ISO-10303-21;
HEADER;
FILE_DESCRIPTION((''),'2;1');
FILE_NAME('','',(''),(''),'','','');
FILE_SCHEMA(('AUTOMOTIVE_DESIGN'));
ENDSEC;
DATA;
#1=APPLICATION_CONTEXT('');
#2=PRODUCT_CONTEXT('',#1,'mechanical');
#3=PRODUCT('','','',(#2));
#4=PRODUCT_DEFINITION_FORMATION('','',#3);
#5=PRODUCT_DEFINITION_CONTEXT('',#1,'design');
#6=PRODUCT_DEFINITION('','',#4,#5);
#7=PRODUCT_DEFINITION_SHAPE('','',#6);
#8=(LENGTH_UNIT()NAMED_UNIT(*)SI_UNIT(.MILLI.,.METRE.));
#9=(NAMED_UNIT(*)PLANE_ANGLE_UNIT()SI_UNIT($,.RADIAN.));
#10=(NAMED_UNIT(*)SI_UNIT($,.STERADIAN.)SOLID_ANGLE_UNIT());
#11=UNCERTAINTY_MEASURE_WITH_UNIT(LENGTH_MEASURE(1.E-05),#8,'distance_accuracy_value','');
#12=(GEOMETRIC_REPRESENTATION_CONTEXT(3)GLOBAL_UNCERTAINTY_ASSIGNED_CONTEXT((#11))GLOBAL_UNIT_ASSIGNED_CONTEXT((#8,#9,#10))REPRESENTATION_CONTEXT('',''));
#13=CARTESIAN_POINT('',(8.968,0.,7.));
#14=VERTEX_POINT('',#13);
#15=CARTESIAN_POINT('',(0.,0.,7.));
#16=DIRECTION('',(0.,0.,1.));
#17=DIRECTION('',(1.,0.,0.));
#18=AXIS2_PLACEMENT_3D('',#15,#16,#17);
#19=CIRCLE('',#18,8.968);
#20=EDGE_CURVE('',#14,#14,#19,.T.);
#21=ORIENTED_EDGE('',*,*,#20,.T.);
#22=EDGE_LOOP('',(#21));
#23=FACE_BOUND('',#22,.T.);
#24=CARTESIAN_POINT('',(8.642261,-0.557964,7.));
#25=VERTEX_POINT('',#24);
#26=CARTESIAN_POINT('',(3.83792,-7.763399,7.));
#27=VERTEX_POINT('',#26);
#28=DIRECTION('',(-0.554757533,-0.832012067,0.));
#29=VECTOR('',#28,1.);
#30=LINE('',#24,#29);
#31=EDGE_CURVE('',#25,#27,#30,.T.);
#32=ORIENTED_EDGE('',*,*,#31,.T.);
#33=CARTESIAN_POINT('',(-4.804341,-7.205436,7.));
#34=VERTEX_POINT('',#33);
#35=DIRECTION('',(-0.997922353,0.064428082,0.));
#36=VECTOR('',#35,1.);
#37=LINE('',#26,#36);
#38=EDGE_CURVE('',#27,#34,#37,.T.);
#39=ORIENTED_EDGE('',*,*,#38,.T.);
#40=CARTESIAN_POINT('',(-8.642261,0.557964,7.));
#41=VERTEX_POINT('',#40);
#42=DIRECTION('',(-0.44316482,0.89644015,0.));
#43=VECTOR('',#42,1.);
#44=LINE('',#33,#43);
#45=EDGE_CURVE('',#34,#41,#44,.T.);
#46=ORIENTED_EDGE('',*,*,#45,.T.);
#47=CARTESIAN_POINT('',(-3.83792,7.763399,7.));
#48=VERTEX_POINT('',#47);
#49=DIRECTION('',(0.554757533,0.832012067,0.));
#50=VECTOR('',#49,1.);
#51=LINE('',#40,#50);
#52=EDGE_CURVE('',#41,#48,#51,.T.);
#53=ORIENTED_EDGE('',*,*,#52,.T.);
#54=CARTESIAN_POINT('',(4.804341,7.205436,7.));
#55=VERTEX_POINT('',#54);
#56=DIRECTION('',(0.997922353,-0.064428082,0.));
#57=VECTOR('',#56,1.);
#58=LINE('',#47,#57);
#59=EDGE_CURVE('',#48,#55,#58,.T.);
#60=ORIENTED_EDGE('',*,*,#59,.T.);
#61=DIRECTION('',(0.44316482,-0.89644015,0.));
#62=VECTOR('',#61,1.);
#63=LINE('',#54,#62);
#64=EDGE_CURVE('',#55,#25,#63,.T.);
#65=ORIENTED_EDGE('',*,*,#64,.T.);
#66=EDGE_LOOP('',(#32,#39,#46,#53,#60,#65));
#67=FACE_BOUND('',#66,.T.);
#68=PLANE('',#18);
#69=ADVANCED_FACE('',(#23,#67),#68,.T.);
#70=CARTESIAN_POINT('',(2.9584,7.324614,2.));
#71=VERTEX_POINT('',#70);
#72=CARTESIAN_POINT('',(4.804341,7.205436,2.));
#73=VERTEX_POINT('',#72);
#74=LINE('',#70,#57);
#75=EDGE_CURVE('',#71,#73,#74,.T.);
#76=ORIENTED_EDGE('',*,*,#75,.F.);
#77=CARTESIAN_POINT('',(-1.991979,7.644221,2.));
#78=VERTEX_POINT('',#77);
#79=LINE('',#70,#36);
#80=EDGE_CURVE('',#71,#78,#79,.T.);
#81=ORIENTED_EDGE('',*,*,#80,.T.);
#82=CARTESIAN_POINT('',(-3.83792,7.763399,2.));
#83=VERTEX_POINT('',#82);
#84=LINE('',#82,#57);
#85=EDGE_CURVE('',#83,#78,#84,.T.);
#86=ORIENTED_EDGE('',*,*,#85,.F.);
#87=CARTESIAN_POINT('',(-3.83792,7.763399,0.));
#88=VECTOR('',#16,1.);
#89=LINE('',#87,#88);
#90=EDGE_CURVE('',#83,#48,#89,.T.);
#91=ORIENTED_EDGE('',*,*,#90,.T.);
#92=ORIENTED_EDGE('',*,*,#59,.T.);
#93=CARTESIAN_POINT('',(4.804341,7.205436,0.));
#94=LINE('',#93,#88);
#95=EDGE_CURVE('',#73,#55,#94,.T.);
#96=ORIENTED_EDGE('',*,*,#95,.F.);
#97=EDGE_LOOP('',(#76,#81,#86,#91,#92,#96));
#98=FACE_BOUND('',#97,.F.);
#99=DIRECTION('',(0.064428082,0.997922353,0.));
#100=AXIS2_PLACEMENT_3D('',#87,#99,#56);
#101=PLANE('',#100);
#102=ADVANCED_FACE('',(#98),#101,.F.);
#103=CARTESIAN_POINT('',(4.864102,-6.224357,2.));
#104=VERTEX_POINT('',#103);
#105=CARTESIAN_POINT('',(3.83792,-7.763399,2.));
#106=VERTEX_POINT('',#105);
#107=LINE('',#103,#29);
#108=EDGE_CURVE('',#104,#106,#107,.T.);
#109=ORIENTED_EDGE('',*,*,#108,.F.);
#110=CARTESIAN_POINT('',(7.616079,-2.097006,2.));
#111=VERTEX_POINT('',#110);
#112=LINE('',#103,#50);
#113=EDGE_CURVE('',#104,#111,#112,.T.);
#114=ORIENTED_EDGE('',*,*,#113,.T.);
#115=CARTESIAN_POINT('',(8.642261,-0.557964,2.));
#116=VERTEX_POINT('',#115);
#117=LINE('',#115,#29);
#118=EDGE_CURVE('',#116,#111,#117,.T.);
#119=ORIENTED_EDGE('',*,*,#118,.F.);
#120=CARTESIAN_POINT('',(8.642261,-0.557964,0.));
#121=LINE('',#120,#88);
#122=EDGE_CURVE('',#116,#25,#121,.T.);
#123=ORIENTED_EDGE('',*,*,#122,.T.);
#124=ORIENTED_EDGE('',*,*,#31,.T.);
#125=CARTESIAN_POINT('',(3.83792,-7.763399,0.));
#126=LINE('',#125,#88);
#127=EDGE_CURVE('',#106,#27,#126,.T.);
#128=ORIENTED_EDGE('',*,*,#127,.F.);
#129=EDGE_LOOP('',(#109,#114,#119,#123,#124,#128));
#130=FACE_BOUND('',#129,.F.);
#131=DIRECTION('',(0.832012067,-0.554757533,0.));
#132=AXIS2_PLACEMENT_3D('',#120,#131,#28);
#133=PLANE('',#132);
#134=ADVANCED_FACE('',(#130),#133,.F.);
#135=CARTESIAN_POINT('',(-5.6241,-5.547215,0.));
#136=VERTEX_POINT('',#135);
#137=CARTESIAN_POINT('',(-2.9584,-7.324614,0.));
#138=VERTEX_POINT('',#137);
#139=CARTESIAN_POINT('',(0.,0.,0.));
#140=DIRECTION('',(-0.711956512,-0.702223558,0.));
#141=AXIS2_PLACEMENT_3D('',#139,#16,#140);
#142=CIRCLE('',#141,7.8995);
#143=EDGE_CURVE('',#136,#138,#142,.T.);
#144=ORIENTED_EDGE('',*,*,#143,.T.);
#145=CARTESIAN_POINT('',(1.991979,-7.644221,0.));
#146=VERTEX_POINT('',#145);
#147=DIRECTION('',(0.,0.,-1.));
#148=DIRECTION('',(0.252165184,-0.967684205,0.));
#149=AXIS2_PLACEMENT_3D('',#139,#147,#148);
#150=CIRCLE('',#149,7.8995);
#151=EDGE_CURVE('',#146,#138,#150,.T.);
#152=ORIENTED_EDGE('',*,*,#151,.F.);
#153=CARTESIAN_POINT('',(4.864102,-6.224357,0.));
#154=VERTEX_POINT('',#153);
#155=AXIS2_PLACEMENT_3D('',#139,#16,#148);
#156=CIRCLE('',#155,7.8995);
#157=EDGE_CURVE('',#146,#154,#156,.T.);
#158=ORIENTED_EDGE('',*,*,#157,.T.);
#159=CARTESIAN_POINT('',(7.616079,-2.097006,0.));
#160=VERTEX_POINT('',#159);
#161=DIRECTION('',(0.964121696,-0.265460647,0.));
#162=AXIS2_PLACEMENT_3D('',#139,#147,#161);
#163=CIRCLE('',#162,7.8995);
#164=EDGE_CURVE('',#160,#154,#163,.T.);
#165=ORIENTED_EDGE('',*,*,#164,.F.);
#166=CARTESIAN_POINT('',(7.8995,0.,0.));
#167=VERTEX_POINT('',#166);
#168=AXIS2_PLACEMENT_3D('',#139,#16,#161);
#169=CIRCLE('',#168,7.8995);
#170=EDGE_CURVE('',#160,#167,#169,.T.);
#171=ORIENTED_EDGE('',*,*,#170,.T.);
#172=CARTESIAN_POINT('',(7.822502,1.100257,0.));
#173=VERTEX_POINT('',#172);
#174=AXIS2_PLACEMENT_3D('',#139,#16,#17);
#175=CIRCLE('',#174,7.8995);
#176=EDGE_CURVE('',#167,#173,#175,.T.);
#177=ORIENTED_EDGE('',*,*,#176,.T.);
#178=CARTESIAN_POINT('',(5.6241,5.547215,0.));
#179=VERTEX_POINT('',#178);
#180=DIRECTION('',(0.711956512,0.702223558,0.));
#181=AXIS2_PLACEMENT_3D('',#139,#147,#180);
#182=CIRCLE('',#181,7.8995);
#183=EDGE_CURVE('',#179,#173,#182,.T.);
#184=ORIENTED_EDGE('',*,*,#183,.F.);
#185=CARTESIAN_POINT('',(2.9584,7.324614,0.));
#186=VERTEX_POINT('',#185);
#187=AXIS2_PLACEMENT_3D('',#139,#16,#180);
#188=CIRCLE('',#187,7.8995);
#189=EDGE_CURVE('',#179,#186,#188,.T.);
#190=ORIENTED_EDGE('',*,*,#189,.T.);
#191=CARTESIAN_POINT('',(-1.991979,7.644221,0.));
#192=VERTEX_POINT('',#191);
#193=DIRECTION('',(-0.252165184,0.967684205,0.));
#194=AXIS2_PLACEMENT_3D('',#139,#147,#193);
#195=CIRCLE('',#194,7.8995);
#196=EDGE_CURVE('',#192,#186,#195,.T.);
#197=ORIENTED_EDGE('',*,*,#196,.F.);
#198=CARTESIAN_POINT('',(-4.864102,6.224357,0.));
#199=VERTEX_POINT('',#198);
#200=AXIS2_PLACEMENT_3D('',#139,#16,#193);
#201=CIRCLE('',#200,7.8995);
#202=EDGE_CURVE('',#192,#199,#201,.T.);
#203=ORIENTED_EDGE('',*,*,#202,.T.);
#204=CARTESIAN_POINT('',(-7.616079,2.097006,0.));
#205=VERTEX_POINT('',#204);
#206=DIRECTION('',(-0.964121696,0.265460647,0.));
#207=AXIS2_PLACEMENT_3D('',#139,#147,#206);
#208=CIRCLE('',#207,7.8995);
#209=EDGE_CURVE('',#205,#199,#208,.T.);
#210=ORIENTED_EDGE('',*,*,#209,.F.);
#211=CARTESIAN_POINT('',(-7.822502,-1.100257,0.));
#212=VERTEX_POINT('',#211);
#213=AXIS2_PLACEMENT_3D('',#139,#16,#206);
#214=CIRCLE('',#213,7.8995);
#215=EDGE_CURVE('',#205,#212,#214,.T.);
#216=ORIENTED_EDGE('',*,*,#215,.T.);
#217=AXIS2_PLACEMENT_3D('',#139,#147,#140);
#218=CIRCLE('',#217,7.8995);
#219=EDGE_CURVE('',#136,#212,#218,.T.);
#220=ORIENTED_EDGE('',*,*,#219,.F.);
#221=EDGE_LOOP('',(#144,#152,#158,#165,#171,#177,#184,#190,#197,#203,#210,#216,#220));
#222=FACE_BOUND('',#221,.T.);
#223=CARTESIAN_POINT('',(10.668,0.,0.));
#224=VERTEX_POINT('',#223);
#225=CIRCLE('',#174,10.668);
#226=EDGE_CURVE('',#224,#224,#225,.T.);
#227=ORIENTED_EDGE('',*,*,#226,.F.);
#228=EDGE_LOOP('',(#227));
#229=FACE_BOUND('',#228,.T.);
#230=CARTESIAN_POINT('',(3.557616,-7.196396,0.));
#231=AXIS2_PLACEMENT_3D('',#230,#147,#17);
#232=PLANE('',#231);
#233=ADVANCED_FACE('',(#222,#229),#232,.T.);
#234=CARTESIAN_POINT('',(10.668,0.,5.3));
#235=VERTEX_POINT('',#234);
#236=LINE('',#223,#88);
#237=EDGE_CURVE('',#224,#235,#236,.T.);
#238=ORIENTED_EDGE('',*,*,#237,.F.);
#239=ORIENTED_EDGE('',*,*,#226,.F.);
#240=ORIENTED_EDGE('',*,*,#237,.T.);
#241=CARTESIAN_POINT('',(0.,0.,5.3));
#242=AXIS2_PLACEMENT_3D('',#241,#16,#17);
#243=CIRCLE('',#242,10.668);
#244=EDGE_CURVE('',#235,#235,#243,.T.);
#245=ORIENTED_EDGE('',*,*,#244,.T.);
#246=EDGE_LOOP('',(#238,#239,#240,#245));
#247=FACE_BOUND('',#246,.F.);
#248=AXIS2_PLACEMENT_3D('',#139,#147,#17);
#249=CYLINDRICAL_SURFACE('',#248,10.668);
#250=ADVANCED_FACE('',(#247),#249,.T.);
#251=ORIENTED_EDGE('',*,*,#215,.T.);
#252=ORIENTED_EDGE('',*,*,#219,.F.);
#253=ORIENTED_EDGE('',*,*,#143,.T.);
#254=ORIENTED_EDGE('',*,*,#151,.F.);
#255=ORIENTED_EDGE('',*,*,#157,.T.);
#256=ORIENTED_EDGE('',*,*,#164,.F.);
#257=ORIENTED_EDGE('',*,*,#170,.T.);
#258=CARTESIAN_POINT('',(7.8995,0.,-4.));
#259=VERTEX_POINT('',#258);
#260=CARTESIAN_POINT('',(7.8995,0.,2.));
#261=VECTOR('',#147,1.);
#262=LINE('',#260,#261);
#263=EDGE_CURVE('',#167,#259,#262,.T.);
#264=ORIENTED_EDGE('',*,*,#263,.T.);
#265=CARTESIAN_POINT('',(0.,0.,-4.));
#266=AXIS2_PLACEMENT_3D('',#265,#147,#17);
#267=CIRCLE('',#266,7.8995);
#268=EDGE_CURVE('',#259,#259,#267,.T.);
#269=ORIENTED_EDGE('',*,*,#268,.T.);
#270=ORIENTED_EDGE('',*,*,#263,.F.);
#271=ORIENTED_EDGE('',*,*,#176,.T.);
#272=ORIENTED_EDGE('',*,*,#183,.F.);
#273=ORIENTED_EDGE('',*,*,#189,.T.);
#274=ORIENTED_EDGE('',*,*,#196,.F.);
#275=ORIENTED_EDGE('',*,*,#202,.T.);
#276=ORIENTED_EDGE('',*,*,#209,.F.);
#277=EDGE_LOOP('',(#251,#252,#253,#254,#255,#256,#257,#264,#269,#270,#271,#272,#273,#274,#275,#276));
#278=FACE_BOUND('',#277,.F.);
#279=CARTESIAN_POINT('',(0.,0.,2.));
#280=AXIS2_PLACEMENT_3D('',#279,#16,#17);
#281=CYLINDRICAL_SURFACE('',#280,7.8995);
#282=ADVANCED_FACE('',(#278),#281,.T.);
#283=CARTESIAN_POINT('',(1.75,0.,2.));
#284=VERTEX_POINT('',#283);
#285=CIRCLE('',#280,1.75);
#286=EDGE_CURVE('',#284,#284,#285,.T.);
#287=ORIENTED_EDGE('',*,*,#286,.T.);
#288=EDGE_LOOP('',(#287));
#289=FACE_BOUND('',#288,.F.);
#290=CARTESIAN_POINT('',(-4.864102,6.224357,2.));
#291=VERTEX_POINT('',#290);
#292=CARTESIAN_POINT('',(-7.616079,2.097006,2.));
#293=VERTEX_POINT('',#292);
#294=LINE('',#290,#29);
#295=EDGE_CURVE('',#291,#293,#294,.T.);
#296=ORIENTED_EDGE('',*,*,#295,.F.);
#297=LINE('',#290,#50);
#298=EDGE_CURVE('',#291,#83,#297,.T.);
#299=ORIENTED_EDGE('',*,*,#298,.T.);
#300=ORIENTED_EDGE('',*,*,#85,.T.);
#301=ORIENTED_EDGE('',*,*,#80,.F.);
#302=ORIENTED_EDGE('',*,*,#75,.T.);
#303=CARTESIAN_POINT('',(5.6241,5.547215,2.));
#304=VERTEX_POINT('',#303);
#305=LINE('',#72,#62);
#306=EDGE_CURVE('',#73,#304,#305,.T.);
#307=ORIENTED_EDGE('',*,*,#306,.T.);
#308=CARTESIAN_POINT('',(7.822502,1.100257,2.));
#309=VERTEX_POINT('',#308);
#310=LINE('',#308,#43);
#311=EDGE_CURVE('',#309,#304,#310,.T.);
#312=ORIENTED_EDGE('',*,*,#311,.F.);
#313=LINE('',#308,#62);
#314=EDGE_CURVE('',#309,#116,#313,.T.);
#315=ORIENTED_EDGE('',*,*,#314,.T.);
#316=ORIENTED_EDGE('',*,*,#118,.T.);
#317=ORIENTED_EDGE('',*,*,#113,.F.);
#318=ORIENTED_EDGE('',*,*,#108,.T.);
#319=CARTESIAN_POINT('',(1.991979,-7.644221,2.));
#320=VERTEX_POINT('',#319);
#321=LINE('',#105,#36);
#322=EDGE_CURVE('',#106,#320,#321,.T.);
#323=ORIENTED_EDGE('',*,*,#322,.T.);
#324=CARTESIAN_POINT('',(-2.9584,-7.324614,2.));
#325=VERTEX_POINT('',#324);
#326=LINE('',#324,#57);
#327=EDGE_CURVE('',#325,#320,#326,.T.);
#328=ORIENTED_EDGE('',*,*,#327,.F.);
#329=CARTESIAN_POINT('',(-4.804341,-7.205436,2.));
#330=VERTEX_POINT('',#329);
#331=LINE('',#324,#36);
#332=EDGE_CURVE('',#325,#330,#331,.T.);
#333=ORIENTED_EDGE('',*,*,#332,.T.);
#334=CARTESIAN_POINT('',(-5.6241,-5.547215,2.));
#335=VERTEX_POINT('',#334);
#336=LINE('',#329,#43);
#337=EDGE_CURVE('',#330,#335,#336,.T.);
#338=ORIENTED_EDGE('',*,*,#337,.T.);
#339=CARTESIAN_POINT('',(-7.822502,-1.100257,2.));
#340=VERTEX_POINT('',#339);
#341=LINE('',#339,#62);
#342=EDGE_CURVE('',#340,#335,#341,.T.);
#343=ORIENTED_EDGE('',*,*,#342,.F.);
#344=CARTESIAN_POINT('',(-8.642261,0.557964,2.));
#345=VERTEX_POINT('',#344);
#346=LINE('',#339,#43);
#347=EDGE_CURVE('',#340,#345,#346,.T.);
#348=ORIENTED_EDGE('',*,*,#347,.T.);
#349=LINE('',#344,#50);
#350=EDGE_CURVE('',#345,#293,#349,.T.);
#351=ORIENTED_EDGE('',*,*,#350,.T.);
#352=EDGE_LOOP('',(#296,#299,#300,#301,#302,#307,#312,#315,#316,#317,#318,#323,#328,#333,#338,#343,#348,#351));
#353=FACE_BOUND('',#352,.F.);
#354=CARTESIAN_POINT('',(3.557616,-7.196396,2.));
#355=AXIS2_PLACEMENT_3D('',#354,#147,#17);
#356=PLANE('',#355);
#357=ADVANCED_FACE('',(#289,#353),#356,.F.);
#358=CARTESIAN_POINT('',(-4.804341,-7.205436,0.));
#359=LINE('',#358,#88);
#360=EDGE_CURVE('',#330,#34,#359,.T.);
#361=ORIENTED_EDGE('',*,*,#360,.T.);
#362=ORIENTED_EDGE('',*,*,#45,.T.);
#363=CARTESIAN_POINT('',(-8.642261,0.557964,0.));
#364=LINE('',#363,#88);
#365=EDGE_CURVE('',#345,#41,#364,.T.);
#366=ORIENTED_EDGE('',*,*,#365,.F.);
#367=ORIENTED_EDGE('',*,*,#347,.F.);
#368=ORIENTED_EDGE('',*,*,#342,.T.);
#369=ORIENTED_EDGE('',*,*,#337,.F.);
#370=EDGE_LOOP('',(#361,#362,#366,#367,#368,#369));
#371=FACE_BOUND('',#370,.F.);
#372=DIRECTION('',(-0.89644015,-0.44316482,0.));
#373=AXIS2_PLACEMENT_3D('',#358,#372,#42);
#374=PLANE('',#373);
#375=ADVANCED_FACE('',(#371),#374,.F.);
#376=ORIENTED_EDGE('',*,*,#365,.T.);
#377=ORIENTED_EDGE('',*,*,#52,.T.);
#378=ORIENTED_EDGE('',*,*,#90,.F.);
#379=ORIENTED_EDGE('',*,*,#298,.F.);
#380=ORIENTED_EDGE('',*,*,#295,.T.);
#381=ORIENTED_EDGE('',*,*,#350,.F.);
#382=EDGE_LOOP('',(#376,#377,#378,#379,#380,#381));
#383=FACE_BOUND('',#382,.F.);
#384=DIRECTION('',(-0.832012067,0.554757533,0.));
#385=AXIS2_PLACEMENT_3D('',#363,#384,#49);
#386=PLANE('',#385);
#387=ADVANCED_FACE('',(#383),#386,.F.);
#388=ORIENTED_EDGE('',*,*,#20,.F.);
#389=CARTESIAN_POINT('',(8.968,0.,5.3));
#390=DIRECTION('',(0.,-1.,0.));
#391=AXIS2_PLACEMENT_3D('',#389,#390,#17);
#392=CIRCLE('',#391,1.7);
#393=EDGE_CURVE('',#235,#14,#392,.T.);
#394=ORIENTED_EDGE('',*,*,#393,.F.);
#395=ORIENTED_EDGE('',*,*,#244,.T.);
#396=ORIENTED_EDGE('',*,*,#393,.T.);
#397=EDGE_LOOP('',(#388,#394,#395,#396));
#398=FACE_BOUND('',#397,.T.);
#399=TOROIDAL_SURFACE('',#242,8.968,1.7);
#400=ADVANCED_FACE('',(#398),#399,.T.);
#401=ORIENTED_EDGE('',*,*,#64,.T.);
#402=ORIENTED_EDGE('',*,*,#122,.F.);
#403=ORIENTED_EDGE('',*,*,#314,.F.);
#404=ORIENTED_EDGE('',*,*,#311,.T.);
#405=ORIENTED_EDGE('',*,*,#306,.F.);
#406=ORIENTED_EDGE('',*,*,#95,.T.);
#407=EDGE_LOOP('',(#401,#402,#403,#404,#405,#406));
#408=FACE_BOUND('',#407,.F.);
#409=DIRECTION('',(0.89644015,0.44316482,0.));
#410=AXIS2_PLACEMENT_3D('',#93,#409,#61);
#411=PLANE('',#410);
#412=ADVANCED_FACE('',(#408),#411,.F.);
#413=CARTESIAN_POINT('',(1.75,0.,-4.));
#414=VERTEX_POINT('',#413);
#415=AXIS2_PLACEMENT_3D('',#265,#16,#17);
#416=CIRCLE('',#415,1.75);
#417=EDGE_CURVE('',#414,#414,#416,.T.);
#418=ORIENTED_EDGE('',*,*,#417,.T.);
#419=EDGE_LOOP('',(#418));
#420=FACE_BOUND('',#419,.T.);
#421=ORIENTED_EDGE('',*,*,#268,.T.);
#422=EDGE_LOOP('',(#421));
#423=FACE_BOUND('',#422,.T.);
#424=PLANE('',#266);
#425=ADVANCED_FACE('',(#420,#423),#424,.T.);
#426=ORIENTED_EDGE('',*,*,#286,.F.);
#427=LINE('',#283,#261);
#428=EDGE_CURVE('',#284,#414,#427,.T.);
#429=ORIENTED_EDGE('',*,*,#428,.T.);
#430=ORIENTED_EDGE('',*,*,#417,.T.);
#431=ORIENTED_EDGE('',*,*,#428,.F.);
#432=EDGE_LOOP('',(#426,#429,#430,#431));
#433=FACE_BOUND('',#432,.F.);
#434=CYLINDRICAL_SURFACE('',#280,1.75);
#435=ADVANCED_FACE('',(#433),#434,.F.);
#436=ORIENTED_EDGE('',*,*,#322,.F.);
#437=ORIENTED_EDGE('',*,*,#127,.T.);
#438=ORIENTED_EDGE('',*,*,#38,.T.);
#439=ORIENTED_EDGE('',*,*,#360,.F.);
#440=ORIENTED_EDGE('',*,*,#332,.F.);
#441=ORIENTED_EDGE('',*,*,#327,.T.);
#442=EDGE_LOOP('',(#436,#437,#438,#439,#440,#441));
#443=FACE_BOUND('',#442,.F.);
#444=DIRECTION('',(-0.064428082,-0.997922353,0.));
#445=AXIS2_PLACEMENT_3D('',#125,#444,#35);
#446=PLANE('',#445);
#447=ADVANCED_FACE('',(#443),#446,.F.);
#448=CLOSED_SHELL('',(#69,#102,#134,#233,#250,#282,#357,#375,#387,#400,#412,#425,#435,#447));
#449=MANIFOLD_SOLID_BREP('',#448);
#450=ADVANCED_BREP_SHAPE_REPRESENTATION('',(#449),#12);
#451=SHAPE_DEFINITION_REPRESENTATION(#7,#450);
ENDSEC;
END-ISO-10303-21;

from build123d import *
from build123d import SkipClean  # not in build123d's __all__

# Parameters (mm, degrees)
F0_R      = 10.668
F1_DEPTH  = 7
F4_DEPTH  = 2
F7_DEPTH  = 2
F8_R      = 7.8995
F9_DEPTH  = 6
F5_R      = 1.75
F10_DEPTH = 25
F11_R     = 1.7


with BuildPart() as f1:
    # F0 (on Top) → F1 (new body)
    with BuildSketch(Plane.XY):
        Circle(F0_R)
        Polygon((-4.8043411611, -7.2054358652), (-8.6422610852, 0.5579635614), (-3.837919924, 7.7633994266), (4.8043411611, 7.2054358652), (8.6422610852, -0.5579635614), (3.837919924, -7.7633994266), align=None, mode=Mode.SUBTRACT)
    extrude(amount=F1_DEPTH)

    # F3 (on offset) → F4 (join)
    with BuildSketch(Plane(origin=(0, 0, 2), x_dir=(1, 0, 0), z_dir=(0, 0, -1))):
        with BuildLine():
            ThreePointArc((1.9919788729, 7.6442213744), (3.5007804976, 7.081428963), (4.8641016704, 6.2243566085))
            Line((4.8641016704, 6.2243566085), (3.837919924, 7.7633994266))
            Line((3.837919924, 7.7633994266), (1.9919788729, 7.6442213744))
        make_face()
        with BuildLine():
            ThreePointArc((-5.6241004659, 5.5472149949), (-4.3823071282, 6.5724793255), (-2.95840011, 7.3246139174))
            Line((-2.95840011, 7.3246139174), (-4.8043411611, 7.2054358652))
            Line((-4.8043411611, 7.2054358652), (-5.6241004659, 5.5472149949))
        make_face()
        with BuildLine():
            ThreePointArc((-7.6160793388, -2.0970063795), (-7.8830876258, -0.5089496375), (-7.8225017804, 1.1002573089))
            Line((-7.8225017804, 1.1002573089), (-8.6422610852, -0.5579635614))
            Line((-8.6422610852, -0.5579635614), (-7.6160793388, -2.0970063795))
        make_face()
        with BuildLine():
            Line((-3.837919924, -7.7633994266), (-1.9919788729, -7.6442213744))
            ThreePointArc((-1.9919788729, -7.6442213744), (-3.5007804976, -7.081428963), (-4.8641016704, -6.2243566085))
            Line((-4.8641016704, -6.2243566085), (-3.837919924, -7.7633994266))
        make_face()
        with BuildLine():
            ThreePointArc((7.6160793388, 2.0970063795), (7.8283241817, 1.0580362738), (7.8995, 0))
            ThreePointArc((7.8995, 0), (7.880226934, -0.5514741317), (7.8225017804, -1.1002573089))
            Line((7.8225017804, -1.1002573089), (8.6422610852, 0.5579635614))
            Line((8.6422610852, 0.5579635614), (7.6160793388, 2.0970063795))
        make_face()
        with BuildLine():
            Line((4.8043411611, -7.2054358652), (5.6241004659, -5.5472149949))
            ThreePointArc((5.6241004659, -5.5472149949), (4.3823071282, -6.5724793255), (2.95840011, -7.3246139174))
            Line((2.95840011, -7.3246139174), (4.8043411611, -7.2054358652))
        make_face()
    extrude(amount=F4_DEPTH)

    # F6 (on face) → F7 (cut)
    with BuildSketch(Plane(origin=(0, 0, 0), x_dir=(1, 0, 0), z_dir=(0, 0, -1))):
        with BuildLine():
            Line((4.8641016704, 6.2243566085), (7.6160793388, 2.0970063795))
            ThreePointArc((7.6160793388, 2.0970063795), (6.5724793255, 4.3823071282), (4.8641016704, 6.2243566085))
        make_face()
        with BuildLine():
            ThreePointArc((5.6241004659, -5.5472149949), (7.081428963, -3.5007804976), (7.8225017804, -1.1002573089))
            Line((7.8225017804, -1.1002573089), (5.6241004659, -5.5472149949))
        make_face()
        with BuildLine():
            ThreePointArc((-1.9919788729, -7.6442213744), (0.5089496375, -7.8830876258), (2.95840011, -7.3246139174))
            Line((2.95840011, -7.3246139174), (-1.9919788729, -7.6442213744))
        make_face()
        with BuildLine():
            ThreePointArc((-7.6160793388, -2.0970063795), (-6.5724793255, -4.3823071282), (-4.8641016704, -6.2243566085))
            Line((-4.8641016704, -6.2243566085), (-7.6160793388, -2.0970063795))
        make_face()
        with BuildLine():
            Line((-7.8225017804, 1.1002573089), (-5.6241004659, 5.5472149949))
            ThreePointArc((-5.6241004659, 5.5472149949), (-7.081428963, 3.5007804976), (-7.8225017804, 1.1002573089))
        make_face()
        with BuildLine():
            Line((-2.95840011, 7.3246139174), (1.9919788729, 7.6442213744))
            ThreePointArc((1.9919788729, 7.6442213744), (-0.5089496375, 7.8830876258), (-2.95840011, 7.3246139174))
        make_face()
    with SkipClean():  # cleaning this boolean's faces spoils the solid; the shape is the same uncleaned
        extrude(amount=-F7_DEPTH, mode=Mode.SUBTRACT)

    # F8 (on offset) → F9 (join)
    with BuildSketch(Plane(origin=(0, 0, 2), x_dir=(1, 0, 0), z_dir=(0, 0, -1))):
        Circle(F8_R)
    extrude(amount=F9_DEPTH)

    # F5 (on face) → F10 (cut)
    with BuildSketch(Plane.XY.offset(2)):
        Circle(F5_R)
    extrude(amount=-F10_DEPTH, mode=Mode.SUBTRACT)

    # F11
    f11_edges = [f1.edges().sort_by_distance(p)[0] for p in [
        (-10.668, 0, 7),
    ]]
    fillet(f11_edges, radius=F11_R)


solid = f1.part
